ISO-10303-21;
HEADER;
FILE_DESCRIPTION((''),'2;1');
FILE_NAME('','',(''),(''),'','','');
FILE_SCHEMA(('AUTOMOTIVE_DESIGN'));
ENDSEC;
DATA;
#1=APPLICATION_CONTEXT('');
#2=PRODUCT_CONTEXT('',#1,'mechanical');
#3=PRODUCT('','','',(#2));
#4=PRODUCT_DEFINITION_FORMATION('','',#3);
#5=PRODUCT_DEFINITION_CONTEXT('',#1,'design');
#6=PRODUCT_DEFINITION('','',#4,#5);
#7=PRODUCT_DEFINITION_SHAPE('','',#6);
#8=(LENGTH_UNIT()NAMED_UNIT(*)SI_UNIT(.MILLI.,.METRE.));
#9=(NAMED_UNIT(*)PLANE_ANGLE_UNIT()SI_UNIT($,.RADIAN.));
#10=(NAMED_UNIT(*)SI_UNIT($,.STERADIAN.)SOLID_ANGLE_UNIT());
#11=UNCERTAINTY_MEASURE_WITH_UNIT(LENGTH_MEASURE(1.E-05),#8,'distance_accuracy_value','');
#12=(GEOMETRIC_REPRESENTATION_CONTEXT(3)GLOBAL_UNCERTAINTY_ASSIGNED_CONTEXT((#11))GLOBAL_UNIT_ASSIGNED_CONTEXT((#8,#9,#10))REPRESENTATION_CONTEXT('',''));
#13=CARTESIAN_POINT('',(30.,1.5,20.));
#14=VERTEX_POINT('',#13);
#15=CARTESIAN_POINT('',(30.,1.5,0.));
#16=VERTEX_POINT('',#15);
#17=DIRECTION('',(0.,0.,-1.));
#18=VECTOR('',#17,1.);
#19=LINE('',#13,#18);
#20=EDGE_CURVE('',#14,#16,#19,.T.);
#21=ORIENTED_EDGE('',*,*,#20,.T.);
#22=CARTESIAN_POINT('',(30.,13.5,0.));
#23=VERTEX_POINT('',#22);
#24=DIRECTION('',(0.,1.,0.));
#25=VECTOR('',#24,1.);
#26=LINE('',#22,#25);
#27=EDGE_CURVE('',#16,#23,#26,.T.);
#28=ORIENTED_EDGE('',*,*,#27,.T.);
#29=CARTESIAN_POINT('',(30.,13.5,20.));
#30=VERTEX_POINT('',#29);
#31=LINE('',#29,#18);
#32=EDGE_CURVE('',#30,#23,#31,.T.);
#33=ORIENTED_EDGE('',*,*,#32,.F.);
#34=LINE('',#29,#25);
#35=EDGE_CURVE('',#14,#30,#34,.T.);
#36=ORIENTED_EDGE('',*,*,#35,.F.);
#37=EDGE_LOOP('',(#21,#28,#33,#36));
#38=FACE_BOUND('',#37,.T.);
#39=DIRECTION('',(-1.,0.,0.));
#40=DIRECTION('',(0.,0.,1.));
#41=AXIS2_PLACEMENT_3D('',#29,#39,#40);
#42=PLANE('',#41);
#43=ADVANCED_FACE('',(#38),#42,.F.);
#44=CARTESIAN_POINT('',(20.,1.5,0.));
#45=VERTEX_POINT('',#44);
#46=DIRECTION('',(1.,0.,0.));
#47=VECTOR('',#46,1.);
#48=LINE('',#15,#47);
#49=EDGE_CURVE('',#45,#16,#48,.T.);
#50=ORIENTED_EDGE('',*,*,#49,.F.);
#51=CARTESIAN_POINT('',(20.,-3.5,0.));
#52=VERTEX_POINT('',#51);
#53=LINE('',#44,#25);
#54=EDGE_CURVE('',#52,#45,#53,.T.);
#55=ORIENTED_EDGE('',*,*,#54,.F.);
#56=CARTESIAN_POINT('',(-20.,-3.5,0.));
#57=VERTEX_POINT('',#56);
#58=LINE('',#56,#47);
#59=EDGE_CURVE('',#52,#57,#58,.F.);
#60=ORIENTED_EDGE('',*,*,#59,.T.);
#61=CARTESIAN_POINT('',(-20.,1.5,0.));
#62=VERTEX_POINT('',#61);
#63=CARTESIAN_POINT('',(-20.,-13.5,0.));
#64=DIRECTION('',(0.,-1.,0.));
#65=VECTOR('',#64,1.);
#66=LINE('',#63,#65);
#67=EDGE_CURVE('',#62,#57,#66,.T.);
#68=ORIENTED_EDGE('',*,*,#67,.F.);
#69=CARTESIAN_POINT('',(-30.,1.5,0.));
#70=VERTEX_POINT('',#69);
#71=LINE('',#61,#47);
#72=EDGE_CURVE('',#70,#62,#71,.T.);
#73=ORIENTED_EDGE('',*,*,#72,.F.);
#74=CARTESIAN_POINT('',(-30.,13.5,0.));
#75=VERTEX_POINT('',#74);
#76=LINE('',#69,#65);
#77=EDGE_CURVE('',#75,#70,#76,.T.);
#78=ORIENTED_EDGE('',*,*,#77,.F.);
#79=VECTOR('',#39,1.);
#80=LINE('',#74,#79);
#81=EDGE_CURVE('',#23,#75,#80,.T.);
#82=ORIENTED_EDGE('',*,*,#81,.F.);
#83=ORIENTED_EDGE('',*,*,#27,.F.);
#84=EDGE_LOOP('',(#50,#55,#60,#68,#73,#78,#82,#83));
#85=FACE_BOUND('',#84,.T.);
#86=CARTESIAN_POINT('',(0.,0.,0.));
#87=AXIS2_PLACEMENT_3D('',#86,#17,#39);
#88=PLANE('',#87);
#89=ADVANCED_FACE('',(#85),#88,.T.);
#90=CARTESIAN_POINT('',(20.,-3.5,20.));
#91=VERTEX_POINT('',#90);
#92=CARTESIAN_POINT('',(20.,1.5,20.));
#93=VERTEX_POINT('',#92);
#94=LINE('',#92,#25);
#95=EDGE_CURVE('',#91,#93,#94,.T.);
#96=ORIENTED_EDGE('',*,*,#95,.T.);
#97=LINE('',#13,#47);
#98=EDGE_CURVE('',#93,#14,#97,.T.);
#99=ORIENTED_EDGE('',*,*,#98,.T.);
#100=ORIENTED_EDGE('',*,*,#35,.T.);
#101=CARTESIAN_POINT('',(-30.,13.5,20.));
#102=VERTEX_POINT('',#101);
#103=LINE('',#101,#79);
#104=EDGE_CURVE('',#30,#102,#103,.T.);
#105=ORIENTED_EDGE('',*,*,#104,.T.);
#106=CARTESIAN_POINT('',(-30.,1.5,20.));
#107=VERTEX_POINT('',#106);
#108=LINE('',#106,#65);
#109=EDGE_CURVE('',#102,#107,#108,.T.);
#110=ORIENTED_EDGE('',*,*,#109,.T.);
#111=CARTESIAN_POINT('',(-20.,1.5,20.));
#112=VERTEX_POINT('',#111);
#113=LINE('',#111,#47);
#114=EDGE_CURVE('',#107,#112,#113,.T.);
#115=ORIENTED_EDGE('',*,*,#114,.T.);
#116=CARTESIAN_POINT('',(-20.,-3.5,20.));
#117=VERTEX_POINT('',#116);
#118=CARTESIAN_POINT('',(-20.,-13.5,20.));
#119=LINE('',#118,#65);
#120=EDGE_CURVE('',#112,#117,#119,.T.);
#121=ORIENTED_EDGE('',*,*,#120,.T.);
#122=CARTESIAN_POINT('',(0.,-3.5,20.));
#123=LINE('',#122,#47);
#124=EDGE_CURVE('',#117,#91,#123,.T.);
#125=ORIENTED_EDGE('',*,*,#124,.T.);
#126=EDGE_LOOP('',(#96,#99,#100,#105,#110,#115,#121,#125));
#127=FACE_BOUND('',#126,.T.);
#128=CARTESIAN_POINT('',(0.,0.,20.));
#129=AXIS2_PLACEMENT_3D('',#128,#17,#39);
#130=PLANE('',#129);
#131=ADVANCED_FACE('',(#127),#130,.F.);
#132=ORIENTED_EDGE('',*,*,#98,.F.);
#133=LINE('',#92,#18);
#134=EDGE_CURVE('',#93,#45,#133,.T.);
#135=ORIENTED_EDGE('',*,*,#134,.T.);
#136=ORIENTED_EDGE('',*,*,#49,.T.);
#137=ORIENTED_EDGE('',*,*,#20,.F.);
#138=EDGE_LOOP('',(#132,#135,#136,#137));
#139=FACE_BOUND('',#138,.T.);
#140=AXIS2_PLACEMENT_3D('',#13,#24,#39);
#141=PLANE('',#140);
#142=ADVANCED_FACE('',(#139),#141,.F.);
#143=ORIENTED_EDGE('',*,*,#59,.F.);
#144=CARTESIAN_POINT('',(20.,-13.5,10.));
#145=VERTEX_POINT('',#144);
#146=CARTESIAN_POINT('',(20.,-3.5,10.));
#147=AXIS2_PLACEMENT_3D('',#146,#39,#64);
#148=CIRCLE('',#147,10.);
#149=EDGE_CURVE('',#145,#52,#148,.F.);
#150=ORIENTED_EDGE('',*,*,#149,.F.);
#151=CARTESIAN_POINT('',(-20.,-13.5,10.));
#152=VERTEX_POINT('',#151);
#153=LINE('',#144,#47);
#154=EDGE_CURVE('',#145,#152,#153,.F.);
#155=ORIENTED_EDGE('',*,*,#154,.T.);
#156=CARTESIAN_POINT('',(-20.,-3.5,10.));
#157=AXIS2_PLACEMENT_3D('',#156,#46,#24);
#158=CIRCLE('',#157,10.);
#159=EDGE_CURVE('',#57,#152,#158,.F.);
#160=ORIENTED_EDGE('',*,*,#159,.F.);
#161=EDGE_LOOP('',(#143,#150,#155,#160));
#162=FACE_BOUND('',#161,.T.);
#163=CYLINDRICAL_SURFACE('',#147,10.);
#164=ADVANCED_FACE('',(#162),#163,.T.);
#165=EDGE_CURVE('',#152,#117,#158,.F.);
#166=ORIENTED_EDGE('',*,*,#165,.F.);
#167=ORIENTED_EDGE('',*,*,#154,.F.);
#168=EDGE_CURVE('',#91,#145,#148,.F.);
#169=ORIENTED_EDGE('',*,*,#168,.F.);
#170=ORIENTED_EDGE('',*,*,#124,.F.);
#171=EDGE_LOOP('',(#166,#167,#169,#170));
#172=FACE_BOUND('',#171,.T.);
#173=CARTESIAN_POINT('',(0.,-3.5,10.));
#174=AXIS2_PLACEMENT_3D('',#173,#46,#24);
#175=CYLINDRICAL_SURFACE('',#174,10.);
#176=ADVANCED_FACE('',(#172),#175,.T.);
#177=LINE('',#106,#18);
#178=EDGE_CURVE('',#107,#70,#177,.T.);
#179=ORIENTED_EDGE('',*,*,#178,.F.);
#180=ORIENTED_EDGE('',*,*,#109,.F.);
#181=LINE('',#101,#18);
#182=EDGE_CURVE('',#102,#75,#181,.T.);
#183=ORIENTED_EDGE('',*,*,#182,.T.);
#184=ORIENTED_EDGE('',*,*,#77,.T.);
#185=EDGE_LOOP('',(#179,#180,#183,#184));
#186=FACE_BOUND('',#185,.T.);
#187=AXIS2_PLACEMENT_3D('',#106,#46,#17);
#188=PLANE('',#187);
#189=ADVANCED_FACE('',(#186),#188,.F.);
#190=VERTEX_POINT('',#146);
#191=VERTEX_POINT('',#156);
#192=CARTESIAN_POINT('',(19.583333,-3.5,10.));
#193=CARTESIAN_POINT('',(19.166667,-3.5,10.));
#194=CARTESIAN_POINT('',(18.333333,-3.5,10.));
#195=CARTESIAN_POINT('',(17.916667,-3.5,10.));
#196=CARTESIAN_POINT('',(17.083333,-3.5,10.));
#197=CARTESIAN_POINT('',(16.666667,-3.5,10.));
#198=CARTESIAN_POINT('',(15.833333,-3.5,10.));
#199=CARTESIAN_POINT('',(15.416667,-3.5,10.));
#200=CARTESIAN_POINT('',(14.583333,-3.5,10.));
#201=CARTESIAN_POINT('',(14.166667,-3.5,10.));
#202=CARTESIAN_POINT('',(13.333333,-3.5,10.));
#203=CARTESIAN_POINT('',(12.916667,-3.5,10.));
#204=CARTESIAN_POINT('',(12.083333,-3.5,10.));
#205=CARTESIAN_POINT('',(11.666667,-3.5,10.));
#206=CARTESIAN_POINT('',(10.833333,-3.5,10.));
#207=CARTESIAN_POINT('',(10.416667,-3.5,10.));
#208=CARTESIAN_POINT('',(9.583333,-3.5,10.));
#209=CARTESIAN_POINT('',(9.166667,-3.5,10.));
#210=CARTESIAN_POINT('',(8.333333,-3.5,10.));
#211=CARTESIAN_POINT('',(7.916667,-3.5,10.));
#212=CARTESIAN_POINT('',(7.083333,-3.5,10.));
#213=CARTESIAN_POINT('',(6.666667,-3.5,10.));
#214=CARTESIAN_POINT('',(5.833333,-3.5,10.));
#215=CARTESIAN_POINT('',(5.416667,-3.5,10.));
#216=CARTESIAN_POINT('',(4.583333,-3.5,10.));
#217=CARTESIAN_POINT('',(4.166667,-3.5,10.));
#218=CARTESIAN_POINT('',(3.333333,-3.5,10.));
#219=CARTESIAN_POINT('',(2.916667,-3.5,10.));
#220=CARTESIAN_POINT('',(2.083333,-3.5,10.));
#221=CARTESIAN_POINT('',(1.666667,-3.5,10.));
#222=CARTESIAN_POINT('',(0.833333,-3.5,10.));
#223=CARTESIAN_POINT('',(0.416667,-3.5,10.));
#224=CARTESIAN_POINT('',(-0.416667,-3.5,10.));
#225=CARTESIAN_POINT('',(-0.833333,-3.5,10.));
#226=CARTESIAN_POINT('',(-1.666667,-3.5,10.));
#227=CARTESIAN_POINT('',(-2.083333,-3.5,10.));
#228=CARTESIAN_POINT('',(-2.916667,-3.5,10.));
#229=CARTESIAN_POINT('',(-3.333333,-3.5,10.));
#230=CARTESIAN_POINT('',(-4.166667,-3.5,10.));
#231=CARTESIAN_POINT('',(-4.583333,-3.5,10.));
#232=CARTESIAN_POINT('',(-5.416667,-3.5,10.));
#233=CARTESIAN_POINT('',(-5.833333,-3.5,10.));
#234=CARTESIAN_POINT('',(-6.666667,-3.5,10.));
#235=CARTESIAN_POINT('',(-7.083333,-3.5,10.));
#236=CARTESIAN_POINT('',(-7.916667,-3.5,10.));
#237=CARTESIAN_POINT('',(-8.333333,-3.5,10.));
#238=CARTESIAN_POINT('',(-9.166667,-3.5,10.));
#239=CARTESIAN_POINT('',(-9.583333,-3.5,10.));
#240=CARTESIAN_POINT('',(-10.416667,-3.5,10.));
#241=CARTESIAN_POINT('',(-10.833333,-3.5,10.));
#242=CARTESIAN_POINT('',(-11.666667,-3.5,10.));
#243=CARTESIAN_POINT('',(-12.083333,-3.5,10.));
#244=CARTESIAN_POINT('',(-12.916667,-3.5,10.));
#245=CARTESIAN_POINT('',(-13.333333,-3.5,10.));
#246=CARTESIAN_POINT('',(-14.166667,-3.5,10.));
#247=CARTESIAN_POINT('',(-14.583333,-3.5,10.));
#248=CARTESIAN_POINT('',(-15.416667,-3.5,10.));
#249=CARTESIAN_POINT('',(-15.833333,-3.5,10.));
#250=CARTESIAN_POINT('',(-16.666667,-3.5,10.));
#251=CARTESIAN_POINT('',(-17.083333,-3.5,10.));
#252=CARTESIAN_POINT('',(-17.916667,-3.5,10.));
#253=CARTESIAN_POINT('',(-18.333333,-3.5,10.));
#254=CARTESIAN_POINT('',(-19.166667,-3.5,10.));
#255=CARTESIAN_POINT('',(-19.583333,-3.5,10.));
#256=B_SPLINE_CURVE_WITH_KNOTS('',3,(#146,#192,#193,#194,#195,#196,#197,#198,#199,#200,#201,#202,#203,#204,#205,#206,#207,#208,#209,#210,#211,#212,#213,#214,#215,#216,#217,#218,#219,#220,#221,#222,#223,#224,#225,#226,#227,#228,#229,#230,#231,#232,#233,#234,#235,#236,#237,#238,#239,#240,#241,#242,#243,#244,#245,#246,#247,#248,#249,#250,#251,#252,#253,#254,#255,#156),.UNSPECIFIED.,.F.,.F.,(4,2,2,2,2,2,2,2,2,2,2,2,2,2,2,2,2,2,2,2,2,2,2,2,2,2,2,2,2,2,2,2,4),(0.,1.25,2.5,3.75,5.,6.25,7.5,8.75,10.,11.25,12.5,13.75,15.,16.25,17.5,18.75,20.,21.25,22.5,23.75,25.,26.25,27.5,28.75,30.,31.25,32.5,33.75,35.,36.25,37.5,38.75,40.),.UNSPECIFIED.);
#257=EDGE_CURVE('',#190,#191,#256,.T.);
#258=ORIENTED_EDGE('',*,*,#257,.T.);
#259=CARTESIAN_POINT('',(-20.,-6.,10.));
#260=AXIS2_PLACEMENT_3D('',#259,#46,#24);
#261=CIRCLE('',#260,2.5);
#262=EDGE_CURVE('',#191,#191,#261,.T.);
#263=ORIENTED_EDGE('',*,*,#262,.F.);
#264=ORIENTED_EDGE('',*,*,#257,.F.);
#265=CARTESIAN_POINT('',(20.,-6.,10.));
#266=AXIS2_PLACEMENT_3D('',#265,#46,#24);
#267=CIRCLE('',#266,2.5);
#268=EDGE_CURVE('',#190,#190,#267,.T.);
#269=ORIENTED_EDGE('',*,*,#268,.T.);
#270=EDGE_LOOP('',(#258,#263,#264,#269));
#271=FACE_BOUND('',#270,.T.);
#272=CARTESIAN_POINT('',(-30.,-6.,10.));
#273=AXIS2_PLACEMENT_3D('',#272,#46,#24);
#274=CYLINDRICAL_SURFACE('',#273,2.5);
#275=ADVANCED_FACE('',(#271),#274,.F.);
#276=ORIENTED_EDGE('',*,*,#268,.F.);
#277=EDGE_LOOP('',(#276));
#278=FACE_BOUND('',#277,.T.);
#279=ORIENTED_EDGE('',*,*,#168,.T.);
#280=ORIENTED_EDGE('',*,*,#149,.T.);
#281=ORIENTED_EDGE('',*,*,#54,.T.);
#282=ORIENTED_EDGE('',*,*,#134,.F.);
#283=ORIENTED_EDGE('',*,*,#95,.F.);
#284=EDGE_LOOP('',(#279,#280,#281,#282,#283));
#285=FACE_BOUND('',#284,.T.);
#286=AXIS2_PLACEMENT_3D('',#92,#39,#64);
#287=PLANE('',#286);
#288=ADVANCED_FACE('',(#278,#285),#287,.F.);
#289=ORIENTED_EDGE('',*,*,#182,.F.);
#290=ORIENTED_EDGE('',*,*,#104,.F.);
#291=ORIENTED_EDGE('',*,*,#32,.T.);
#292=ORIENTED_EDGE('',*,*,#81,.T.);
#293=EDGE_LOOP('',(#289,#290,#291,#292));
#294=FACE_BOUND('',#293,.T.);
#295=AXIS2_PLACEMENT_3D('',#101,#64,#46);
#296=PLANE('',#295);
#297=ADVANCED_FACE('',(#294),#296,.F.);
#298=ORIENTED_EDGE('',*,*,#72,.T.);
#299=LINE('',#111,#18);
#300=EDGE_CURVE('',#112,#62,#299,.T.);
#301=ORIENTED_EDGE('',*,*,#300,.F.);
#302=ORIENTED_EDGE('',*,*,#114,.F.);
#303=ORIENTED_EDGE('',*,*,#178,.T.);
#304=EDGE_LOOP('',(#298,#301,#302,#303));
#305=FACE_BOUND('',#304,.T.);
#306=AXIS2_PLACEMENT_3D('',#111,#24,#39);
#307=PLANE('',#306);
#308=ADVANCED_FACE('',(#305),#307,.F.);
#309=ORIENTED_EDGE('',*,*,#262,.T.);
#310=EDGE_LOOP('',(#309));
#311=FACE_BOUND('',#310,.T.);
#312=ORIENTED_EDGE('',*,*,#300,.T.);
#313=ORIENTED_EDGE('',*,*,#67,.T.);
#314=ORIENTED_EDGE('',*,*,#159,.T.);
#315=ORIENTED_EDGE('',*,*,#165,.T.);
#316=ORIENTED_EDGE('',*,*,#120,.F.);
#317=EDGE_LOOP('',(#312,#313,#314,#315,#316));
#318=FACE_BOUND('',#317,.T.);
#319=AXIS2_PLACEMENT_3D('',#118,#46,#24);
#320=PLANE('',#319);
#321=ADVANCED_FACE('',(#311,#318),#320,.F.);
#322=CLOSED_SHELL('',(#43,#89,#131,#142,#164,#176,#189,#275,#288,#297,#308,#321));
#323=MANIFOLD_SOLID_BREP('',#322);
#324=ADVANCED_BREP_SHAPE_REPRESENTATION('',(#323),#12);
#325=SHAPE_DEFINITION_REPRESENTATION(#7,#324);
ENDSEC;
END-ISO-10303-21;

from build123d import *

# Parameters (mm, degrees)
BOSS_EXTRUDE1_DEPTH = 20
SKETCH2_R           = 2.5
CUT_EXTRUDE1_DEPTH  = 56.518015094
FILLET1_R           = 10


with BuildPart() as part:
    # Sketch1 → Boss-Extrude1 (new body)
    with BuildSketch(Plane.XY):
        Polygon((-30, 13.5), (30, 13.5), (30, 1.5), (20, 1.5), (20, -13.5), (-20, -13.5), (-20, 1.5), (-30, 1.5), align=None)
    extrude(amount=BOSS_EXTRUDE1_DEPTH)

    # Sketch2 → Cut-Extrude1 (cut, through all)
    with BuildSketch(Plane(origin=(20, 0, 0), x_dir=(0, 0, -1), z_dir=(1, 0, 0))):
        with Locations(Location((-10, -6, 0), (0, 0, 90))):
            Circle(SKETCH2_R)
    extrude(amount=-CUT_EXTRUDE1_DEPTH, mode=Mode.SUBTRACT)

    # Fillet1
    fillet1_edges = [part.edges().sort_by_distance(p)[0] for p in [
        (0, -13.5, 0),
        (0, -13.5, 20),
    ]]
    fillet(fillet1_edges, radius=FILLET1_R - 0.0001)  # a hair under: the kernel refuses the full size


solid = part.part
